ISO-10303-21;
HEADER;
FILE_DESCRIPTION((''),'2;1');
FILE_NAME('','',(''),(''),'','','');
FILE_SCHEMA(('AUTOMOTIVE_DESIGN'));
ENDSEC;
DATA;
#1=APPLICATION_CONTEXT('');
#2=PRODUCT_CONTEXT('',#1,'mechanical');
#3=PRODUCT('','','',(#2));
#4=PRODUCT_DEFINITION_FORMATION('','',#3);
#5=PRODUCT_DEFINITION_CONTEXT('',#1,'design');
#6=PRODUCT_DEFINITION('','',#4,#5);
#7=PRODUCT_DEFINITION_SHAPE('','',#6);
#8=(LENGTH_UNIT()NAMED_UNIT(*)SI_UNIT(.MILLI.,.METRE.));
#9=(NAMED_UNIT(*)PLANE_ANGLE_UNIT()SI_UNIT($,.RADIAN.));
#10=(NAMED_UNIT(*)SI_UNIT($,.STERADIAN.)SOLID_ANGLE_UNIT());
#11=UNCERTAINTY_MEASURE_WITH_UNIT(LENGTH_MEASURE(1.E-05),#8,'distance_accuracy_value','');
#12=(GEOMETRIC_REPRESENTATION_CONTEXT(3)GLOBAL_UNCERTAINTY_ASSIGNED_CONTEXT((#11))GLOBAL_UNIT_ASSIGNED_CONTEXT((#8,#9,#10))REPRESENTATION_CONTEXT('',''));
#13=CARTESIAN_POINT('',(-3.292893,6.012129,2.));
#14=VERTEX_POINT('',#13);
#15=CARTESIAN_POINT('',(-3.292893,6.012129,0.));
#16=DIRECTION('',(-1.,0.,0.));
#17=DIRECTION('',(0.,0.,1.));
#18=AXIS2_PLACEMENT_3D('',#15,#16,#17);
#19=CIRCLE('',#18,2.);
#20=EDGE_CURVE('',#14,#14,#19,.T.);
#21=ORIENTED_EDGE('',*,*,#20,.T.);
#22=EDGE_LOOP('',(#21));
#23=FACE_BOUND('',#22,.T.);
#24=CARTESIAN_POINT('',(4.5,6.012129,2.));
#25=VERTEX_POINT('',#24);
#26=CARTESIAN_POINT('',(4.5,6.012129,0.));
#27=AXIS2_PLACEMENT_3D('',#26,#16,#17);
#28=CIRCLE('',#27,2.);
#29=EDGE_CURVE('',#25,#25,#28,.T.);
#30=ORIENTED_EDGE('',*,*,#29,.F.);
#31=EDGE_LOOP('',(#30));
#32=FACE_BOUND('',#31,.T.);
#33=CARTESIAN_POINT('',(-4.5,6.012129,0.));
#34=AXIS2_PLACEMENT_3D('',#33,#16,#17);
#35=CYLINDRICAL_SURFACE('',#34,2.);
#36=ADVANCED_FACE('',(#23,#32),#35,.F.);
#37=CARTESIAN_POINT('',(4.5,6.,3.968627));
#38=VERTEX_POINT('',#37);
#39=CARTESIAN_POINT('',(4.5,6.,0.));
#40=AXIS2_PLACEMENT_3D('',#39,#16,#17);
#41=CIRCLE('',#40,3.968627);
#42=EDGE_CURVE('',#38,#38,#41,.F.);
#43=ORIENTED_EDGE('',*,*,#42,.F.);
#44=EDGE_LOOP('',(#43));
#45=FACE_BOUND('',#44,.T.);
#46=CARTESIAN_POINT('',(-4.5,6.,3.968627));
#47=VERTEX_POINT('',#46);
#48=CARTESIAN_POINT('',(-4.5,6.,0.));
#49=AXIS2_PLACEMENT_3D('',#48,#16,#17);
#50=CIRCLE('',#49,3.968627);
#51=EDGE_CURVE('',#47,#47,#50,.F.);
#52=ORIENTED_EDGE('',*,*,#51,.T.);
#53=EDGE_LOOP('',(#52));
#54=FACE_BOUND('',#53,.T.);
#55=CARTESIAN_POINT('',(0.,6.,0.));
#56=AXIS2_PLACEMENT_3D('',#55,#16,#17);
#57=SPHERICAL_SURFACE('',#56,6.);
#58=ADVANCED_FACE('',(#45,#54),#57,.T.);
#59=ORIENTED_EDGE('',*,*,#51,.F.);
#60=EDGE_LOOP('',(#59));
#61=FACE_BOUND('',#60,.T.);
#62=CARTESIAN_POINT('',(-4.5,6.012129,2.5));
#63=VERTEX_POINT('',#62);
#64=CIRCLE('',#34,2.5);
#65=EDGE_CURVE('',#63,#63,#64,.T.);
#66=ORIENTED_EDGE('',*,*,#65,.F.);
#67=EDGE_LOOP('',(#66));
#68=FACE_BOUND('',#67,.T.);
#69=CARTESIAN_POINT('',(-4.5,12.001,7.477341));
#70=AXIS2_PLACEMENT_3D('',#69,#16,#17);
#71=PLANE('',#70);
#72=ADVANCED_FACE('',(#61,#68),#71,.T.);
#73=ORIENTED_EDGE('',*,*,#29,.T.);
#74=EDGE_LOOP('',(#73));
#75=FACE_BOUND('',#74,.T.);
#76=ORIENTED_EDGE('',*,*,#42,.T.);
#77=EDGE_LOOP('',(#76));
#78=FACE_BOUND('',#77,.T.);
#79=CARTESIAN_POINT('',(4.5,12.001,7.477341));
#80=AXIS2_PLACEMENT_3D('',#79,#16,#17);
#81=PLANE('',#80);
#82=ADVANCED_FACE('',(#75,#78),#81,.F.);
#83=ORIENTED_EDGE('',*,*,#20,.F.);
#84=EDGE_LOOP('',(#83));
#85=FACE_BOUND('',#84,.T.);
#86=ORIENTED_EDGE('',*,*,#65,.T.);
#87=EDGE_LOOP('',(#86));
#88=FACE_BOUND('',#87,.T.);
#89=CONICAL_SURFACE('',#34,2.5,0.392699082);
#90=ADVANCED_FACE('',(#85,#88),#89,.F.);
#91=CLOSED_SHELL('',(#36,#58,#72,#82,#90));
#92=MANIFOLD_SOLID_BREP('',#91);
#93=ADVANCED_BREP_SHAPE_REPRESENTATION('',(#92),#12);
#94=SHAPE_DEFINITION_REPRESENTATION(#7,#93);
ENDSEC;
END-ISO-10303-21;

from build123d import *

# Parameters (mm, degrees)
CUT_EXTRUDE2_OUTLINE_W = 3
CUT_EXTRUDE2_OUTLINE_H = 14.95468232
CUT_EXTRUDE2_DEPTH     = 12
HOLE1_D                = 4
HOLE1_DEPTH            = 12
HOLE1_CSINK_D          = 5
HOLE1_CSINK_ANGLE      = 45


with BuildPart() as part:
    # Sketch1 → Revolve1 (revolve)
    with BuildSketch(Plane.XY):
        with BuildLine():
            Line((0, 0), (0, 12))
            ThreePointArc((0, 12), (-6, 6), (0, 0))
        make_face()
    revolve(axis=Axis((0, 0, 0), (0, 1, 0)))

    # Cut-Extrude2: read off the stored shape, not the designer's step
    # Cut-Extrude2 outline → Cut-Extrude2 (cut)
    with BuildSketch(Plane(origin=(0, 0, 0), x_dir=(1, 0, 0), z_dir=(0, 1, 0))):
        with Locations((-6, 0)):
            Rectangle(CUT_EXTRUDE2_OUTLINE_W, CUT_EXTRUDE2_OUTLINE_H)
    cut_extrude2 = extrude(amount=CUT_EXTRUDE2_DEPTH, mode=Mode.SUBTRACT)

    # Mirror2: Cut-Extrude2 across plane
    add(cut_extrude2.mirror(Plane(origin=(0, 0, 0), x_dir=(0, 0, 1), z_dir=(1, 0, 0))), mode=Mode.SUBTRACT)

    # Hole1
    with Locations(Plane.ZY.offset(4.5)):
        with Locations((0, 6.01212861)):
            CounterSinkHole(HOLE1_D / 2, HOLE1_CSINK_D / 2, depth=HOLE1_DEPTH, counter_sink_angle=HOLE1_CSINK_ANGLE)


solid = part.part
